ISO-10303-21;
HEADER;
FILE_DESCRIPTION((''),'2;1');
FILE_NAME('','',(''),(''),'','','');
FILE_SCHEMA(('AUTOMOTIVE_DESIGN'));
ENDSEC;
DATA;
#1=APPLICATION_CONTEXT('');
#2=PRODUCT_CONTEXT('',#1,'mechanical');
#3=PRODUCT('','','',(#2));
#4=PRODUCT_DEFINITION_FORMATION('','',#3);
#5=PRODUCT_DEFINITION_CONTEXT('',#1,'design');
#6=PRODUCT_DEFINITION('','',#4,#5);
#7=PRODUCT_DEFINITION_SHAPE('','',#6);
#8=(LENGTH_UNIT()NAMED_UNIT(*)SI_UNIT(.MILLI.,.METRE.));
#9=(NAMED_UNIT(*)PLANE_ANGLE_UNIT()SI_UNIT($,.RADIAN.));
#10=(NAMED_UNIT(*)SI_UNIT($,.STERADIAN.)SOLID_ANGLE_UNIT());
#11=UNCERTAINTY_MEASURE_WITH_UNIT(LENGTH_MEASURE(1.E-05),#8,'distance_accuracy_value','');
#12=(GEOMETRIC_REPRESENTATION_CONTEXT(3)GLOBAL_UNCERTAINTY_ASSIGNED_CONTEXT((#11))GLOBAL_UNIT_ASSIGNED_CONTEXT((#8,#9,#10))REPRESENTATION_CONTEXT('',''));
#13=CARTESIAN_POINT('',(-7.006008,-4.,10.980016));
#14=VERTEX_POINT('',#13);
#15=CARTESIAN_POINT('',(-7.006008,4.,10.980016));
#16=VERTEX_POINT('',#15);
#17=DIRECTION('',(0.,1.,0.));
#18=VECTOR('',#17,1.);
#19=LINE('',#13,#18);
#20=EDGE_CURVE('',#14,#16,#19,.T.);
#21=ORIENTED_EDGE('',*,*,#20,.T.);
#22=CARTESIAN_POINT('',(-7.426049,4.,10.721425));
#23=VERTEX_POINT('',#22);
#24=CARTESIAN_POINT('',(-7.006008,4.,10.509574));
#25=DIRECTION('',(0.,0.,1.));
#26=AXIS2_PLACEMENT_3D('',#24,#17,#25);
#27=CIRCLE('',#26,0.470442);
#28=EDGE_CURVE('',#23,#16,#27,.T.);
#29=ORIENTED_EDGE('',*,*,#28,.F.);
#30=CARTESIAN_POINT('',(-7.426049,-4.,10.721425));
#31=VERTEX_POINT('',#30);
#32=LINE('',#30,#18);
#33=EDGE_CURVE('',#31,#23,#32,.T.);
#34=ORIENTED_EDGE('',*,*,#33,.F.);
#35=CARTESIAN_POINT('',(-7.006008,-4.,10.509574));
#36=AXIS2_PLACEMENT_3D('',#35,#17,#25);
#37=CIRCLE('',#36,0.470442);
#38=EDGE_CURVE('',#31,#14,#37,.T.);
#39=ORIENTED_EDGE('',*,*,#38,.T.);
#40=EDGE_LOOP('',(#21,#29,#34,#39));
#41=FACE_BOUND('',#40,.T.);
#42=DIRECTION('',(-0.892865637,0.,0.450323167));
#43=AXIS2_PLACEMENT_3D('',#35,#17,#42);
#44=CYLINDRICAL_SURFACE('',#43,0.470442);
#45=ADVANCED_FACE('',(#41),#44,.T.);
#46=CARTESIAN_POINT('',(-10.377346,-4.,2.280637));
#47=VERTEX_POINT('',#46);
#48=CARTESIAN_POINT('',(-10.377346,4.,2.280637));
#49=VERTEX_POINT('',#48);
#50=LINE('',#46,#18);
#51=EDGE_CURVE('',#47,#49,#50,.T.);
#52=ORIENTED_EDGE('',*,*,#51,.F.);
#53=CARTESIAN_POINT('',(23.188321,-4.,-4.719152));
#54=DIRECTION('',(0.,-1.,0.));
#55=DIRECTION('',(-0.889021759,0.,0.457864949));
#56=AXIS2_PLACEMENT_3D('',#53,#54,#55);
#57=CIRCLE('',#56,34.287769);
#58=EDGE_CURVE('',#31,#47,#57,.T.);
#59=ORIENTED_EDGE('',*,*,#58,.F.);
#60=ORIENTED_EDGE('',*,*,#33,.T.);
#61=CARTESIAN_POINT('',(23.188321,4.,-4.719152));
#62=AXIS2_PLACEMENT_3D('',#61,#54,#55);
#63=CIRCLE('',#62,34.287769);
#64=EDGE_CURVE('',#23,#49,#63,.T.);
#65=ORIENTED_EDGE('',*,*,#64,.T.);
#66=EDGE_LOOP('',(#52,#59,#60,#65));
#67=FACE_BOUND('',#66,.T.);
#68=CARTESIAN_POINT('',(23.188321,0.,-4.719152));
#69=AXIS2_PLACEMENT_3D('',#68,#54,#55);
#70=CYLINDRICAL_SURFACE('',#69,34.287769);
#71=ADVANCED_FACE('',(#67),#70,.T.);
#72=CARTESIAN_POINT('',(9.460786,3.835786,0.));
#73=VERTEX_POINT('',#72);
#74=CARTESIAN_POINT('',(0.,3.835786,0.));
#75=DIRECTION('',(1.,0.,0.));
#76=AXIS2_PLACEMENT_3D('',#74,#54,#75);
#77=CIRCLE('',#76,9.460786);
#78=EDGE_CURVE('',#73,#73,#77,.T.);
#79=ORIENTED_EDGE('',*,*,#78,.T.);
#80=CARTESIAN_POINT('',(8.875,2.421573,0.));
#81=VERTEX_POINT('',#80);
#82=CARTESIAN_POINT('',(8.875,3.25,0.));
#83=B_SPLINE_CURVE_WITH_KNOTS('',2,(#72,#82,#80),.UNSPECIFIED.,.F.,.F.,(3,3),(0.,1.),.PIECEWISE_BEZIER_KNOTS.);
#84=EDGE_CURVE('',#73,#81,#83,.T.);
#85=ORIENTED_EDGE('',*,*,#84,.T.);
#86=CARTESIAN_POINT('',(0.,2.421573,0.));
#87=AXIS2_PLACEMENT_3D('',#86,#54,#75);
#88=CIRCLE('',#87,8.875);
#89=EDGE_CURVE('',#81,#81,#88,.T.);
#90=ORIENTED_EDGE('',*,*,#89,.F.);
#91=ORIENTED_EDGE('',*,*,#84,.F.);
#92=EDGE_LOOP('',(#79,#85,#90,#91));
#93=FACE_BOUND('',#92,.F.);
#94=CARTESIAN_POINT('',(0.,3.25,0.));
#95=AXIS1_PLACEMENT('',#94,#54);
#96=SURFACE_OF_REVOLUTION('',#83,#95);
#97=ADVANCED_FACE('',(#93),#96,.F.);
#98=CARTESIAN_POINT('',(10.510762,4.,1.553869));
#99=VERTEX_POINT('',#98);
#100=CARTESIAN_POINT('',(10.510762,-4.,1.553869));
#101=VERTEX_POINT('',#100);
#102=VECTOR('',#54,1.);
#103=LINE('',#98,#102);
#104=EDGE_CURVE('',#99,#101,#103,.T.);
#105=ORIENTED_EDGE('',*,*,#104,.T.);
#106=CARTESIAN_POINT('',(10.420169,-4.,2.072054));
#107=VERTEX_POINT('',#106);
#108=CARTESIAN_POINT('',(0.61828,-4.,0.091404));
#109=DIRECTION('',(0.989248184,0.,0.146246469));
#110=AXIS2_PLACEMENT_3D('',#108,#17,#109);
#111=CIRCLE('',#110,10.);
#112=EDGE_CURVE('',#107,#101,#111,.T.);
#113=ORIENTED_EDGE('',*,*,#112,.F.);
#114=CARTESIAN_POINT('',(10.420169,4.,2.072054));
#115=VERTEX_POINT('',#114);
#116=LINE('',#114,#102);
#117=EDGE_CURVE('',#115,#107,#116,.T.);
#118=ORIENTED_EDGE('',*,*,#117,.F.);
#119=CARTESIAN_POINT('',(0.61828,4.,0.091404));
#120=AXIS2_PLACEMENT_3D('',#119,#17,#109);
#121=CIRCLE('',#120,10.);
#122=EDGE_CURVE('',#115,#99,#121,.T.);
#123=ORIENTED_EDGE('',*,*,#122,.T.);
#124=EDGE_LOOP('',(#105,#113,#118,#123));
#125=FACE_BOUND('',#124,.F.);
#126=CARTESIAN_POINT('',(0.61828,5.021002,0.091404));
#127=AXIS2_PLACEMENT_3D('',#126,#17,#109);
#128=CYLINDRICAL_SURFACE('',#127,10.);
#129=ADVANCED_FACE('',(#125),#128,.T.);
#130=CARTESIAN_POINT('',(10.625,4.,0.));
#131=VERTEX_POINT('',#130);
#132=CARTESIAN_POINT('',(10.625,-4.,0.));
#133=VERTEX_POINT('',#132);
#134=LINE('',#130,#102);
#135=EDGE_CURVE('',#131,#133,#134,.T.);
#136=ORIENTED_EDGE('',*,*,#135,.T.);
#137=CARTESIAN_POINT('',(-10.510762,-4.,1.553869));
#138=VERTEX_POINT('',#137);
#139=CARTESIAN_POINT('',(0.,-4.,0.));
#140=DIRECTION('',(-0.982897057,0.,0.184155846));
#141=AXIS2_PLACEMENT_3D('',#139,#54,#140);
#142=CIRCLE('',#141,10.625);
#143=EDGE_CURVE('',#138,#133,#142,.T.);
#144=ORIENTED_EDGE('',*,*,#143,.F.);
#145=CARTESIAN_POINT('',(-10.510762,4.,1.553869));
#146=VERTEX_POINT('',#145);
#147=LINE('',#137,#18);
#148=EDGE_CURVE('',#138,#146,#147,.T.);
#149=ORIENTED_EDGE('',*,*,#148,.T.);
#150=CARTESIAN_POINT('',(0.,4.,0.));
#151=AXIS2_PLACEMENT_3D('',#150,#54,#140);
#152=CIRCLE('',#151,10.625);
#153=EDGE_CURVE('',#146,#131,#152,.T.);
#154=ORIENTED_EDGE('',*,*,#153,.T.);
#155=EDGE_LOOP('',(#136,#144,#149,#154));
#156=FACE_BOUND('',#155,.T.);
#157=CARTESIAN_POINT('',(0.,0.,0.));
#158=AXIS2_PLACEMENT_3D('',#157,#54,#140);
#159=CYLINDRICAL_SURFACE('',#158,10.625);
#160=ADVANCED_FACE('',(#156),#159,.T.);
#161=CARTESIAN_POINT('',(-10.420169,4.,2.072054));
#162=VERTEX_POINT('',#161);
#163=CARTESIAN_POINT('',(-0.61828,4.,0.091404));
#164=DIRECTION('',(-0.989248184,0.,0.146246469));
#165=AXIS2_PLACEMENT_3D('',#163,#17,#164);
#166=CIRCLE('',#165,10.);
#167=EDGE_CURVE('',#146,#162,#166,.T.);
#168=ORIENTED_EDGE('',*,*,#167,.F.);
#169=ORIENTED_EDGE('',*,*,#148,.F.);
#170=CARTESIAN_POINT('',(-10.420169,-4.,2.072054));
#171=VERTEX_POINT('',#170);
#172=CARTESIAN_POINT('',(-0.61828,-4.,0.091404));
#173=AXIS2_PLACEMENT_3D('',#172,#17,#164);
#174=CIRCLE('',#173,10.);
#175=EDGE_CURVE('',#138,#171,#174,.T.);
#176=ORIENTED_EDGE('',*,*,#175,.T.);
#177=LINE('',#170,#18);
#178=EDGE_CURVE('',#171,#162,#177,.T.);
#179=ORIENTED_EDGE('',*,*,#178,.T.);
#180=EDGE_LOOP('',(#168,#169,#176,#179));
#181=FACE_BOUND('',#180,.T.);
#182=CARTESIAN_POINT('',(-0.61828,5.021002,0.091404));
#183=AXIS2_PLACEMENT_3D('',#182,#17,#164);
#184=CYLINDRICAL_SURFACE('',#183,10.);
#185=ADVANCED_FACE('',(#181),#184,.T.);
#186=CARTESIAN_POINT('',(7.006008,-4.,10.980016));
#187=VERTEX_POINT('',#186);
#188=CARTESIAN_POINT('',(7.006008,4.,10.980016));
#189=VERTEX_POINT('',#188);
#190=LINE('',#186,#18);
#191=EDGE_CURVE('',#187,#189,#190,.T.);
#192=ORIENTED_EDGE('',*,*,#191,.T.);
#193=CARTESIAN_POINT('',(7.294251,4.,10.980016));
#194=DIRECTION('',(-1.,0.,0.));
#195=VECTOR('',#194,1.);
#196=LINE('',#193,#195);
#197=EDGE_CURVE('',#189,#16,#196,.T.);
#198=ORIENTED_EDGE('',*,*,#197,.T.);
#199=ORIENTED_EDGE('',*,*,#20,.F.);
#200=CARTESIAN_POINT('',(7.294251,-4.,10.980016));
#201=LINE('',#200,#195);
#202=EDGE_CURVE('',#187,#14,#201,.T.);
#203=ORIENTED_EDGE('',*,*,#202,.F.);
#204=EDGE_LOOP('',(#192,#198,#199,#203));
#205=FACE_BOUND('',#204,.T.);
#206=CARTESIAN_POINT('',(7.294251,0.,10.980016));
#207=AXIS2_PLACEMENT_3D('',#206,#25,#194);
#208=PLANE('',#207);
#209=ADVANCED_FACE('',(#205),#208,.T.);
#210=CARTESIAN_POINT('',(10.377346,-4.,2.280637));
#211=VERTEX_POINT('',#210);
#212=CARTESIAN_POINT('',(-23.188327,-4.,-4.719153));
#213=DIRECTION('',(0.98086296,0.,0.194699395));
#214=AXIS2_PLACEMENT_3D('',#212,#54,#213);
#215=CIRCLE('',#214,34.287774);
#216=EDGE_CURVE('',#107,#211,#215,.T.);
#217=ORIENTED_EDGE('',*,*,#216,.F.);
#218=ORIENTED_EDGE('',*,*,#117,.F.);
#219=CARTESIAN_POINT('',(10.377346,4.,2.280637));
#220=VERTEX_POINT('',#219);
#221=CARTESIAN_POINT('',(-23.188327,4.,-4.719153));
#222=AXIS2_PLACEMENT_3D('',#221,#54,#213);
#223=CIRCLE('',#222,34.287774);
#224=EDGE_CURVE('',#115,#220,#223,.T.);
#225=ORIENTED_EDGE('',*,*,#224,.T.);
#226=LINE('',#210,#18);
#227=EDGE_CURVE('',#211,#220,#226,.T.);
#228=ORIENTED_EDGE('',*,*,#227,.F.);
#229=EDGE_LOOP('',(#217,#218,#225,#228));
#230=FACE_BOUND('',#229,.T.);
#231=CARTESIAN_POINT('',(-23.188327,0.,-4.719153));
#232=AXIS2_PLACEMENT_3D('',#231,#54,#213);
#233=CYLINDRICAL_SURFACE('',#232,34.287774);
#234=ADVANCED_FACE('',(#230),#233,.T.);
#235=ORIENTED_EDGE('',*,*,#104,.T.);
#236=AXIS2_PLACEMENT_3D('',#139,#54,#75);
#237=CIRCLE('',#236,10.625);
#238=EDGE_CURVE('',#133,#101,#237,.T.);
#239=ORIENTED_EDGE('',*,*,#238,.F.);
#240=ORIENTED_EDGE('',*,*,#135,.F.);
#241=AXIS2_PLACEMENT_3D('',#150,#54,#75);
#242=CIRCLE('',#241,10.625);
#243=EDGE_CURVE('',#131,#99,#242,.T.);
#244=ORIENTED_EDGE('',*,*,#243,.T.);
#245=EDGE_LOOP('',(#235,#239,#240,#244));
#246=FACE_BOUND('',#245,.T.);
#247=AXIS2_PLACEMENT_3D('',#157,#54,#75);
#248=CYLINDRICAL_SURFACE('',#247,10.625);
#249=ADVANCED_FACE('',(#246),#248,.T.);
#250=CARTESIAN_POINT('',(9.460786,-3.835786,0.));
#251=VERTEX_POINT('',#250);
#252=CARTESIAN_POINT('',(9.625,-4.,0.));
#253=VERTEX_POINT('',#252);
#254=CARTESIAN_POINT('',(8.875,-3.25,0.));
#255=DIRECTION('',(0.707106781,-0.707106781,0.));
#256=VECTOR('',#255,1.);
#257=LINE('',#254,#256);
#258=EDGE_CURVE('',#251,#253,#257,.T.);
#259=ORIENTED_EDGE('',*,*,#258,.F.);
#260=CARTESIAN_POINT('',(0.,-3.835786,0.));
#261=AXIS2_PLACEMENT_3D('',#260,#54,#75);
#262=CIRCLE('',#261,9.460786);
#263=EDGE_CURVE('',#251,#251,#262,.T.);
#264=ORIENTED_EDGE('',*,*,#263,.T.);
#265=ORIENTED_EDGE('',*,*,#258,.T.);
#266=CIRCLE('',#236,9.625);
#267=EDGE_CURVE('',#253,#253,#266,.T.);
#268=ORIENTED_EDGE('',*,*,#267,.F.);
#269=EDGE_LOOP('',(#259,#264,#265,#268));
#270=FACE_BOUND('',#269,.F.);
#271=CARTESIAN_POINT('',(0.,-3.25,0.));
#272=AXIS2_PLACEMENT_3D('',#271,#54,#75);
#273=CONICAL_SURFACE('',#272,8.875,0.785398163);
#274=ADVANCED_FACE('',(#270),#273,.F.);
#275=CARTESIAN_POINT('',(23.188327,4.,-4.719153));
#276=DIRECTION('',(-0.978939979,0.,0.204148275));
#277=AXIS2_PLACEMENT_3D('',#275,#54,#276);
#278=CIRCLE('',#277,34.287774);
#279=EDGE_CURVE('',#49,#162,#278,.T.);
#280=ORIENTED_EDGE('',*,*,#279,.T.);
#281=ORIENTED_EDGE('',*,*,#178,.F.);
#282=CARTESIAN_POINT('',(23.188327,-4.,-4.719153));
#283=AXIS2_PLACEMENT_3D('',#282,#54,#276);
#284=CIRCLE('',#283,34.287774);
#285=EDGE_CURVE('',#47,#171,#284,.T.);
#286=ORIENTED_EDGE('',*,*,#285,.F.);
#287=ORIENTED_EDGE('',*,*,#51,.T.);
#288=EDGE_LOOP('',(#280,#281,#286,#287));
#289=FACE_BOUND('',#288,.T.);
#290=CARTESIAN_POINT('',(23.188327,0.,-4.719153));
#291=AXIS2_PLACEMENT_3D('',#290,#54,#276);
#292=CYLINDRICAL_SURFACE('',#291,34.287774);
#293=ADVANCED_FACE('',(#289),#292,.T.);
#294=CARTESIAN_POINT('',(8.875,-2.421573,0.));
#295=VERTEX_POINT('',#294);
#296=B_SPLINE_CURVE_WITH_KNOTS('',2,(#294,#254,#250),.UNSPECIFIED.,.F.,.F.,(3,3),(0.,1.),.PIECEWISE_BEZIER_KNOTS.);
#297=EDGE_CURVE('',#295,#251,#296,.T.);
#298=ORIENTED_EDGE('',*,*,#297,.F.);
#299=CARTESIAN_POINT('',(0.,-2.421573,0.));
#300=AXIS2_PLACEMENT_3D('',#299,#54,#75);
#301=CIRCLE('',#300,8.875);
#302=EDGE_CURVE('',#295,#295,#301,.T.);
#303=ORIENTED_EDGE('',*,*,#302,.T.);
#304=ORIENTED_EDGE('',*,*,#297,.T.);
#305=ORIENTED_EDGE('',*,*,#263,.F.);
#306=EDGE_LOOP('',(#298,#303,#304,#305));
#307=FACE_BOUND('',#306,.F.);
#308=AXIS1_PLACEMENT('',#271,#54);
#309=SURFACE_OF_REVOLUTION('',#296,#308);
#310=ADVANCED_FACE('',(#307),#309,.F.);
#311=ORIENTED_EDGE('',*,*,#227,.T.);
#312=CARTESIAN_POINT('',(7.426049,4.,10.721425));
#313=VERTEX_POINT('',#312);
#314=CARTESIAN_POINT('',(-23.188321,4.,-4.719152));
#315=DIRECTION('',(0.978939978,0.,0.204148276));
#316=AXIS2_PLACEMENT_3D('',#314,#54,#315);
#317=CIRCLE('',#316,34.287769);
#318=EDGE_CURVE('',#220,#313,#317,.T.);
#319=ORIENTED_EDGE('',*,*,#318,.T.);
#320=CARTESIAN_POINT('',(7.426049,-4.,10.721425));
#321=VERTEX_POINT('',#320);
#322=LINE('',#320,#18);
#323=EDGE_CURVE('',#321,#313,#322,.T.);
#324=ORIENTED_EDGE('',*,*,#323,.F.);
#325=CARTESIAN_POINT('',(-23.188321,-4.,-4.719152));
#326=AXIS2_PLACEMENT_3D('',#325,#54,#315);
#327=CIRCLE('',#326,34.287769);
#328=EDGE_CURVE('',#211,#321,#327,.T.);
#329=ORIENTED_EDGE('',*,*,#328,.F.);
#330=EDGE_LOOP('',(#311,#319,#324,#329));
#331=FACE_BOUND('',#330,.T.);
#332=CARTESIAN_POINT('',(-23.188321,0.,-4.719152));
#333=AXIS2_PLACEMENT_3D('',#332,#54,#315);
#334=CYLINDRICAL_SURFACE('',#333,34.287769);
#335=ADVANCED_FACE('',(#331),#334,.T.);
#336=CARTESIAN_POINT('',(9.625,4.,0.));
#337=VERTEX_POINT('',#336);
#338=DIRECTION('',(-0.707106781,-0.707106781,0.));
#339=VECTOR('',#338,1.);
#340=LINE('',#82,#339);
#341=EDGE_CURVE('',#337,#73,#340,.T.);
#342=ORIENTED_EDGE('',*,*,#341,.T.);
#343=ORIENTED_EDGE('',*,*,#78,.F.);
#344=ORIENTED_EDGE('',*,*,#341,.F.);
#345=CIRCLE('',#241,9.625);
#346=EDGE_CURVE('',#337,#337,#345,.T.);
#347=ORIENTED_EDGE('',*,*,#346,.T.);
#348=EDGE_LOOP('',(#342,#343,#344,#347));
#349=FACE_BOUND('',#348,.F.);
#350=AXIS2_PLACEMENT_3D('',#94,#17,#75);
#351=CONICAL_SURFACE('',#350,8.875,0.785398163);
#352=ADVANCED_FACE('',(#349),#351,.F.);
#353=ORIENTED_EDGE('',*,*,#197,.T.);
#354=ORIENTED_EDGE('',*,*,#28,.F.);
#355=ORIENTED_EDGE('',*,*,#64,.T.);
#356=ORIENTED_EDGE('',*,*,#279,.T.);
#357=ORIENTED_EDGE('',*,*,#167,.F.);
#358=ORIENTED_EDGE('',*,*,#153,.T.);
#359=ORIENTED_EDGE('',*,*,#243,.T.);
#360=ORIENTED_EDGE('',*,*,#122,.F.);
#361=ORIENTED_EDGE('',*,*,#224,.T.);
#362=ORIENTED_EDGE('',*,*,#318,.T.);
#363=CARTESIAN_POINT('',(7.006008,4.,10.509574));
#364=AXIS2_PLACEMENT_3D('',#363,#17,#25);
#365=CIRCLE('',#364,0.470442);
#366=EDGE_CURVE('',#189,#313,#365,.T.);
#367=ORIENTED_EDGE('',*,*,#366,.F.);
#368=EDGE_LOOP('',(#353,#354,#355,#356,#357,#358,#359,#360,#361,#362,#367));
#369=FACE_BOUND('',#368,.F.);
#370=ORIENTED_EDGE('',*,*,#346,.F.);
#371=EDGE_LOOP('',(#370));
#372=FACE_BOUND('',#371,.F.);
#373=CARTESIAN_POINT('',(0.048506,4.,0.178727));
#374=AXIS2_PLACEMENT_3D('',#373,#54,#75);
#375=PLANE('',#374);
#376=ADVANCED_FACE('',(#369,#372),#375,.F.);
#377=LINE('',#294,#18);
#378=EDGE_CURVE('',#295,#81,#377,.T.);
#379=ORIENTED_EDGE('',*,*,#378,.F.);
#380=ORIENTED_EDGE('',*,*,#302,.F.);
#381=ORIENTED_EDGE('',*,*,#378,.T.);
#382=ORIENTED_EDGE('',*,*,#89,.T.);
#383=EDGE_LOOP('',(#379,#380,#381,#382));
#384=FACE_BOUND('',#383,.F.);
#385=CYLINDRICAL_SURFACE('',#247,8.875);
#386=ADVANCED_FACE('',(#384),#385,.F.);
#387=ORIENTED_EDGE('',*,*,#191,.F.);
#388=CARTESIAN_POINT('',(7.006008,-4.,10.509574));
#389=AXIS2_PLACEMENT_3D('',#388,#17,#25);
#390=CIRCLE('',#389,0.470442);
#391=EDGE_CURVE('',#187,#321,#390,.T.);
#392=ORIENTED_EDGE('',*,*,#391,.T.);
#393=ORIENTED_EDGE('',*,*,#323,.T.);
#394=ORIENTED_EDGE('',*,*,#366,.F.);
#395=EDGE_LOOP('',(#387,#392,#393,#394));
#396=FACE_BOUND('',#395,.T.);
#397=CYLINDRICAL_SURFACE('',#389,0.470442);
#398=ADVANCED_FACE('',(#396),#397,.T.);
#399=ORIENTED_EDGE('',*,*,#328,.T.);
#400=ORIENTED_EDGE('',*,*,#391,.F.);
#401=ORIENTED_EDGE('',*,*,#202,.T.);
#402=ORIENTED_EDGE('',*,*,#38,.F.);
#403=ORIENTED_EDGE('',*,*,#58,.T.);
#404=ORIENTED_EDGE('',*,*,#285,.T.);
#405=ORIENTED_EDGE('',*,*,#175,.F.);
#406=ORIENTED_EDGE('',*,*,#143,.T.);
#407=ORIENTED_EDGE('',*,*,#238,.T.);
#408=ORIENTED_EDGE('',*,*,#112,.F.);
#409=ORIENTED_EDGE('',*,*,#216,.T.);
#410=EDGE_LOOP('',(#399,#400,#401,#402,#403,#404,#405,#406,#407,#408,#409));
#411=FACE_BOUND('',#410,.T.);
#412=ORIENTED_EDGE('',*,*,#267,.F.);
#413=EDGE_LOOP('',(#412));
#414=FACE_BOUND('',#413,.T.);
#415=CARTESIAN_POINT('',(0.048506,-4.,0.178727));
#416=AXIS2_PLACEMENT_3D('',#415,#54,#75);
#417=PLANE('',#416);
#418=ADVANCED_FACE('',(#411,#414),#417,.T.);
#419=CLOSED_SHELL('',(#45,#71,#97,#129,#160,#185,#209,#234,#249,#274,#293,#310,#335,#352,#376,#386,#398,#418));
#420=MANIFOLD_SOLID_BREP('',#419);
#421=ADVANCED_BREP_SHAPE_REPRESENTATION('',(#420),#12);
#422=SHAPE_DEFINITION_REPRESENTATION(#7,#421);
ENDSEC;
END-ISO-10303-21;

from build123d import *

# Parameters (mm, degrees)
F0_R          = 8.875
F1_DEPTH      = 4
F1_DEPTH_BACK = 4
F2_T1_DEPTH   = 10.0420034221
F3_SIZE       = 0.75
F4_R          = 0.4704417071


# Not quite as in the source:
# - a fillet or chamfer that OpenCascade refuses, or shapes differently, is made with other operations: its cross-section is extruded or revolved along the edge and cut away or added


with BuildPart() as f1:
    # F0 (on Front) → F1 (new body, two sides)
    with BuildSketch(Plane.XZ) as f1_sk:
        with BuildLine():
            ThreePointArc((-10.4432812291, 1.9566558639), (-0.9825380249, -10.5794727671), (10.625, 0))
            ThreePointArc((10.625, 0), (10.5794727671, 0.9825380249), (10.4432812291, 1.9566558639))
            ThreePointArc((10.4432812291, 1.9566558639), (10.4107043639, 2.1187258688), (10.3773464915, 2.2806369277))
            ThreePointArc((10.3773464915, 2.2806369277), (0, 10.625), (-10.3773464915, 2.2806369277))
            ThreePointArc((-10.3773464915, 2.2806369277), (-10.4107043639, 2.1187258688), (-10.4432812291, 1.9566558639))
        make_face()
        Circle(F0_R, mode=Mode.SUBTRACT)
        with BuildLine():
            ThreePointArc((-10.3773464915, 2.2806369277), (0, 10.625), (10.3773464915, 2.2806369277))
            ThreePointArc((10.3773464915, 2.2806369277), (9.1298481014, 6.734538497), (7.2942513551, 10.9800156206))
            Line((7.2942513551, 10.9800156206), (0, 10.9800156206))
            Line((0, 10.9800156206), (-7.2942513551, 10.9800156206))
            ThreePointArc((-7.2942513551, 10.9800156206), (-9.1298481014, 6.734538497), (-10.3773464915, 2.2806369277))
        make_face()
    extrude(amount=F1_DEPTH)
    extrude(f1_sk.sketch, amount=-F1_DEPTH_BACK)

    # F2: fillet of radius 10 on 2 edges, made by hand

    # F2_s2 → F2_t1 (cut)
    with BuildSketch(Plane.XZ.offset(-5.021001711)):
        with BuildLine():
            ThreePointArc((-10.5107619586, 1.5538687363), (-10.4688734573, 1.813557001), (-10.4201690702, 2.0720536626))
            ThreePointArc((-10.4201690702, 2.0720536626), (-10.4317746612, 2.0143646795), (-10.4432812291, 1.9566558639))
            ThreePointArc((-10.4432812291, 1.9566558639), (-10.4789570495, 1.7555865557), (-10.5107619586, 1.5538687363))
        make_face()
        with BuildLine():
            ThreePointArc((10.5107619586, 1.5538687363), (10.4688734573, 1.813557001), (10.4201690702, 2.0720536626))
            ThreePointArc((10.4201690702, 2.0720536626), (10.4317746612, 2.0143646795), (10.4432812291, 1.9566558639))
            ThreePointArc((10.4432812291, 1.9566558639), (10.4789570495, 1.7555865557), (10.5107619586, 1.5538687363))
        make_face()
    extrude(amount=F2_T1_DEPTH, mode=Mode.SUBTRACT)

    # F3
    f3_edges = [f1.edges().sort_by_distance(p)[0] for p in [
        (-8.875, 4, 0),
        (-8.875, -4, 0),
    ]]
    chamfer(f3_edges, length=F3_SIZE)

    # F4
    f4_edges = [f1.edges().sort_by_distance(p)[0] for p in [
        (-7.294251, 0, 10.980016),
        (7.294251, 0, 10.980016),
    ]]
    fillet(f4_edges, radius=F4_R)

    # F5: fillet of radius 2 on 2 edges, made by hand

    # F5_s1 → F5_t2 (revolve, cut)
    with BuildSketch(Plane.XY):
        with BuildLine():
            add(Edge.make_bspline(
                [(8.875, -2.4215728753), (8.875, -3.25), (9.4607864376, -3.8357864376)],
                knots=[0, 0, 0, 1, 1, 1], degree=2, weights=[1, 1, 1]))
            Line((9.4607864376, -3.8357864376), (8.875, -3.25))
            Line((8.875, -3.25), (8.875, -2.4215728753))
        make_face()
    revolve(axis=Axis((0, -3.25, 0), (0, -1, 0)), mode=Mode.SUBTRACT)

    # F5_s3 → F5_t4 (revolve, cut)
    with BuildSketch(Plane.XY):
        with BuildLine():
            add(Edge.make_bspline(
                [(9.4607864376, 3.8357864376), (8.875, 3.25), (8.875, 2.4215728753)],
                knots=[0, 0, 0, 1, 1, 1], degree=2, weights=[1, 1, 1]))
            Line((8.875, 2.4215728753), (8.875, 3.25))
            Line((8.875, 3.25), (9.4607864376, 3.8357864376))
        make_face()
    revolve(axis=Axis((0, 3.25, 0), (0, -1, 0)), mode=Mode.SUBTRACT)


solid = f1.part
